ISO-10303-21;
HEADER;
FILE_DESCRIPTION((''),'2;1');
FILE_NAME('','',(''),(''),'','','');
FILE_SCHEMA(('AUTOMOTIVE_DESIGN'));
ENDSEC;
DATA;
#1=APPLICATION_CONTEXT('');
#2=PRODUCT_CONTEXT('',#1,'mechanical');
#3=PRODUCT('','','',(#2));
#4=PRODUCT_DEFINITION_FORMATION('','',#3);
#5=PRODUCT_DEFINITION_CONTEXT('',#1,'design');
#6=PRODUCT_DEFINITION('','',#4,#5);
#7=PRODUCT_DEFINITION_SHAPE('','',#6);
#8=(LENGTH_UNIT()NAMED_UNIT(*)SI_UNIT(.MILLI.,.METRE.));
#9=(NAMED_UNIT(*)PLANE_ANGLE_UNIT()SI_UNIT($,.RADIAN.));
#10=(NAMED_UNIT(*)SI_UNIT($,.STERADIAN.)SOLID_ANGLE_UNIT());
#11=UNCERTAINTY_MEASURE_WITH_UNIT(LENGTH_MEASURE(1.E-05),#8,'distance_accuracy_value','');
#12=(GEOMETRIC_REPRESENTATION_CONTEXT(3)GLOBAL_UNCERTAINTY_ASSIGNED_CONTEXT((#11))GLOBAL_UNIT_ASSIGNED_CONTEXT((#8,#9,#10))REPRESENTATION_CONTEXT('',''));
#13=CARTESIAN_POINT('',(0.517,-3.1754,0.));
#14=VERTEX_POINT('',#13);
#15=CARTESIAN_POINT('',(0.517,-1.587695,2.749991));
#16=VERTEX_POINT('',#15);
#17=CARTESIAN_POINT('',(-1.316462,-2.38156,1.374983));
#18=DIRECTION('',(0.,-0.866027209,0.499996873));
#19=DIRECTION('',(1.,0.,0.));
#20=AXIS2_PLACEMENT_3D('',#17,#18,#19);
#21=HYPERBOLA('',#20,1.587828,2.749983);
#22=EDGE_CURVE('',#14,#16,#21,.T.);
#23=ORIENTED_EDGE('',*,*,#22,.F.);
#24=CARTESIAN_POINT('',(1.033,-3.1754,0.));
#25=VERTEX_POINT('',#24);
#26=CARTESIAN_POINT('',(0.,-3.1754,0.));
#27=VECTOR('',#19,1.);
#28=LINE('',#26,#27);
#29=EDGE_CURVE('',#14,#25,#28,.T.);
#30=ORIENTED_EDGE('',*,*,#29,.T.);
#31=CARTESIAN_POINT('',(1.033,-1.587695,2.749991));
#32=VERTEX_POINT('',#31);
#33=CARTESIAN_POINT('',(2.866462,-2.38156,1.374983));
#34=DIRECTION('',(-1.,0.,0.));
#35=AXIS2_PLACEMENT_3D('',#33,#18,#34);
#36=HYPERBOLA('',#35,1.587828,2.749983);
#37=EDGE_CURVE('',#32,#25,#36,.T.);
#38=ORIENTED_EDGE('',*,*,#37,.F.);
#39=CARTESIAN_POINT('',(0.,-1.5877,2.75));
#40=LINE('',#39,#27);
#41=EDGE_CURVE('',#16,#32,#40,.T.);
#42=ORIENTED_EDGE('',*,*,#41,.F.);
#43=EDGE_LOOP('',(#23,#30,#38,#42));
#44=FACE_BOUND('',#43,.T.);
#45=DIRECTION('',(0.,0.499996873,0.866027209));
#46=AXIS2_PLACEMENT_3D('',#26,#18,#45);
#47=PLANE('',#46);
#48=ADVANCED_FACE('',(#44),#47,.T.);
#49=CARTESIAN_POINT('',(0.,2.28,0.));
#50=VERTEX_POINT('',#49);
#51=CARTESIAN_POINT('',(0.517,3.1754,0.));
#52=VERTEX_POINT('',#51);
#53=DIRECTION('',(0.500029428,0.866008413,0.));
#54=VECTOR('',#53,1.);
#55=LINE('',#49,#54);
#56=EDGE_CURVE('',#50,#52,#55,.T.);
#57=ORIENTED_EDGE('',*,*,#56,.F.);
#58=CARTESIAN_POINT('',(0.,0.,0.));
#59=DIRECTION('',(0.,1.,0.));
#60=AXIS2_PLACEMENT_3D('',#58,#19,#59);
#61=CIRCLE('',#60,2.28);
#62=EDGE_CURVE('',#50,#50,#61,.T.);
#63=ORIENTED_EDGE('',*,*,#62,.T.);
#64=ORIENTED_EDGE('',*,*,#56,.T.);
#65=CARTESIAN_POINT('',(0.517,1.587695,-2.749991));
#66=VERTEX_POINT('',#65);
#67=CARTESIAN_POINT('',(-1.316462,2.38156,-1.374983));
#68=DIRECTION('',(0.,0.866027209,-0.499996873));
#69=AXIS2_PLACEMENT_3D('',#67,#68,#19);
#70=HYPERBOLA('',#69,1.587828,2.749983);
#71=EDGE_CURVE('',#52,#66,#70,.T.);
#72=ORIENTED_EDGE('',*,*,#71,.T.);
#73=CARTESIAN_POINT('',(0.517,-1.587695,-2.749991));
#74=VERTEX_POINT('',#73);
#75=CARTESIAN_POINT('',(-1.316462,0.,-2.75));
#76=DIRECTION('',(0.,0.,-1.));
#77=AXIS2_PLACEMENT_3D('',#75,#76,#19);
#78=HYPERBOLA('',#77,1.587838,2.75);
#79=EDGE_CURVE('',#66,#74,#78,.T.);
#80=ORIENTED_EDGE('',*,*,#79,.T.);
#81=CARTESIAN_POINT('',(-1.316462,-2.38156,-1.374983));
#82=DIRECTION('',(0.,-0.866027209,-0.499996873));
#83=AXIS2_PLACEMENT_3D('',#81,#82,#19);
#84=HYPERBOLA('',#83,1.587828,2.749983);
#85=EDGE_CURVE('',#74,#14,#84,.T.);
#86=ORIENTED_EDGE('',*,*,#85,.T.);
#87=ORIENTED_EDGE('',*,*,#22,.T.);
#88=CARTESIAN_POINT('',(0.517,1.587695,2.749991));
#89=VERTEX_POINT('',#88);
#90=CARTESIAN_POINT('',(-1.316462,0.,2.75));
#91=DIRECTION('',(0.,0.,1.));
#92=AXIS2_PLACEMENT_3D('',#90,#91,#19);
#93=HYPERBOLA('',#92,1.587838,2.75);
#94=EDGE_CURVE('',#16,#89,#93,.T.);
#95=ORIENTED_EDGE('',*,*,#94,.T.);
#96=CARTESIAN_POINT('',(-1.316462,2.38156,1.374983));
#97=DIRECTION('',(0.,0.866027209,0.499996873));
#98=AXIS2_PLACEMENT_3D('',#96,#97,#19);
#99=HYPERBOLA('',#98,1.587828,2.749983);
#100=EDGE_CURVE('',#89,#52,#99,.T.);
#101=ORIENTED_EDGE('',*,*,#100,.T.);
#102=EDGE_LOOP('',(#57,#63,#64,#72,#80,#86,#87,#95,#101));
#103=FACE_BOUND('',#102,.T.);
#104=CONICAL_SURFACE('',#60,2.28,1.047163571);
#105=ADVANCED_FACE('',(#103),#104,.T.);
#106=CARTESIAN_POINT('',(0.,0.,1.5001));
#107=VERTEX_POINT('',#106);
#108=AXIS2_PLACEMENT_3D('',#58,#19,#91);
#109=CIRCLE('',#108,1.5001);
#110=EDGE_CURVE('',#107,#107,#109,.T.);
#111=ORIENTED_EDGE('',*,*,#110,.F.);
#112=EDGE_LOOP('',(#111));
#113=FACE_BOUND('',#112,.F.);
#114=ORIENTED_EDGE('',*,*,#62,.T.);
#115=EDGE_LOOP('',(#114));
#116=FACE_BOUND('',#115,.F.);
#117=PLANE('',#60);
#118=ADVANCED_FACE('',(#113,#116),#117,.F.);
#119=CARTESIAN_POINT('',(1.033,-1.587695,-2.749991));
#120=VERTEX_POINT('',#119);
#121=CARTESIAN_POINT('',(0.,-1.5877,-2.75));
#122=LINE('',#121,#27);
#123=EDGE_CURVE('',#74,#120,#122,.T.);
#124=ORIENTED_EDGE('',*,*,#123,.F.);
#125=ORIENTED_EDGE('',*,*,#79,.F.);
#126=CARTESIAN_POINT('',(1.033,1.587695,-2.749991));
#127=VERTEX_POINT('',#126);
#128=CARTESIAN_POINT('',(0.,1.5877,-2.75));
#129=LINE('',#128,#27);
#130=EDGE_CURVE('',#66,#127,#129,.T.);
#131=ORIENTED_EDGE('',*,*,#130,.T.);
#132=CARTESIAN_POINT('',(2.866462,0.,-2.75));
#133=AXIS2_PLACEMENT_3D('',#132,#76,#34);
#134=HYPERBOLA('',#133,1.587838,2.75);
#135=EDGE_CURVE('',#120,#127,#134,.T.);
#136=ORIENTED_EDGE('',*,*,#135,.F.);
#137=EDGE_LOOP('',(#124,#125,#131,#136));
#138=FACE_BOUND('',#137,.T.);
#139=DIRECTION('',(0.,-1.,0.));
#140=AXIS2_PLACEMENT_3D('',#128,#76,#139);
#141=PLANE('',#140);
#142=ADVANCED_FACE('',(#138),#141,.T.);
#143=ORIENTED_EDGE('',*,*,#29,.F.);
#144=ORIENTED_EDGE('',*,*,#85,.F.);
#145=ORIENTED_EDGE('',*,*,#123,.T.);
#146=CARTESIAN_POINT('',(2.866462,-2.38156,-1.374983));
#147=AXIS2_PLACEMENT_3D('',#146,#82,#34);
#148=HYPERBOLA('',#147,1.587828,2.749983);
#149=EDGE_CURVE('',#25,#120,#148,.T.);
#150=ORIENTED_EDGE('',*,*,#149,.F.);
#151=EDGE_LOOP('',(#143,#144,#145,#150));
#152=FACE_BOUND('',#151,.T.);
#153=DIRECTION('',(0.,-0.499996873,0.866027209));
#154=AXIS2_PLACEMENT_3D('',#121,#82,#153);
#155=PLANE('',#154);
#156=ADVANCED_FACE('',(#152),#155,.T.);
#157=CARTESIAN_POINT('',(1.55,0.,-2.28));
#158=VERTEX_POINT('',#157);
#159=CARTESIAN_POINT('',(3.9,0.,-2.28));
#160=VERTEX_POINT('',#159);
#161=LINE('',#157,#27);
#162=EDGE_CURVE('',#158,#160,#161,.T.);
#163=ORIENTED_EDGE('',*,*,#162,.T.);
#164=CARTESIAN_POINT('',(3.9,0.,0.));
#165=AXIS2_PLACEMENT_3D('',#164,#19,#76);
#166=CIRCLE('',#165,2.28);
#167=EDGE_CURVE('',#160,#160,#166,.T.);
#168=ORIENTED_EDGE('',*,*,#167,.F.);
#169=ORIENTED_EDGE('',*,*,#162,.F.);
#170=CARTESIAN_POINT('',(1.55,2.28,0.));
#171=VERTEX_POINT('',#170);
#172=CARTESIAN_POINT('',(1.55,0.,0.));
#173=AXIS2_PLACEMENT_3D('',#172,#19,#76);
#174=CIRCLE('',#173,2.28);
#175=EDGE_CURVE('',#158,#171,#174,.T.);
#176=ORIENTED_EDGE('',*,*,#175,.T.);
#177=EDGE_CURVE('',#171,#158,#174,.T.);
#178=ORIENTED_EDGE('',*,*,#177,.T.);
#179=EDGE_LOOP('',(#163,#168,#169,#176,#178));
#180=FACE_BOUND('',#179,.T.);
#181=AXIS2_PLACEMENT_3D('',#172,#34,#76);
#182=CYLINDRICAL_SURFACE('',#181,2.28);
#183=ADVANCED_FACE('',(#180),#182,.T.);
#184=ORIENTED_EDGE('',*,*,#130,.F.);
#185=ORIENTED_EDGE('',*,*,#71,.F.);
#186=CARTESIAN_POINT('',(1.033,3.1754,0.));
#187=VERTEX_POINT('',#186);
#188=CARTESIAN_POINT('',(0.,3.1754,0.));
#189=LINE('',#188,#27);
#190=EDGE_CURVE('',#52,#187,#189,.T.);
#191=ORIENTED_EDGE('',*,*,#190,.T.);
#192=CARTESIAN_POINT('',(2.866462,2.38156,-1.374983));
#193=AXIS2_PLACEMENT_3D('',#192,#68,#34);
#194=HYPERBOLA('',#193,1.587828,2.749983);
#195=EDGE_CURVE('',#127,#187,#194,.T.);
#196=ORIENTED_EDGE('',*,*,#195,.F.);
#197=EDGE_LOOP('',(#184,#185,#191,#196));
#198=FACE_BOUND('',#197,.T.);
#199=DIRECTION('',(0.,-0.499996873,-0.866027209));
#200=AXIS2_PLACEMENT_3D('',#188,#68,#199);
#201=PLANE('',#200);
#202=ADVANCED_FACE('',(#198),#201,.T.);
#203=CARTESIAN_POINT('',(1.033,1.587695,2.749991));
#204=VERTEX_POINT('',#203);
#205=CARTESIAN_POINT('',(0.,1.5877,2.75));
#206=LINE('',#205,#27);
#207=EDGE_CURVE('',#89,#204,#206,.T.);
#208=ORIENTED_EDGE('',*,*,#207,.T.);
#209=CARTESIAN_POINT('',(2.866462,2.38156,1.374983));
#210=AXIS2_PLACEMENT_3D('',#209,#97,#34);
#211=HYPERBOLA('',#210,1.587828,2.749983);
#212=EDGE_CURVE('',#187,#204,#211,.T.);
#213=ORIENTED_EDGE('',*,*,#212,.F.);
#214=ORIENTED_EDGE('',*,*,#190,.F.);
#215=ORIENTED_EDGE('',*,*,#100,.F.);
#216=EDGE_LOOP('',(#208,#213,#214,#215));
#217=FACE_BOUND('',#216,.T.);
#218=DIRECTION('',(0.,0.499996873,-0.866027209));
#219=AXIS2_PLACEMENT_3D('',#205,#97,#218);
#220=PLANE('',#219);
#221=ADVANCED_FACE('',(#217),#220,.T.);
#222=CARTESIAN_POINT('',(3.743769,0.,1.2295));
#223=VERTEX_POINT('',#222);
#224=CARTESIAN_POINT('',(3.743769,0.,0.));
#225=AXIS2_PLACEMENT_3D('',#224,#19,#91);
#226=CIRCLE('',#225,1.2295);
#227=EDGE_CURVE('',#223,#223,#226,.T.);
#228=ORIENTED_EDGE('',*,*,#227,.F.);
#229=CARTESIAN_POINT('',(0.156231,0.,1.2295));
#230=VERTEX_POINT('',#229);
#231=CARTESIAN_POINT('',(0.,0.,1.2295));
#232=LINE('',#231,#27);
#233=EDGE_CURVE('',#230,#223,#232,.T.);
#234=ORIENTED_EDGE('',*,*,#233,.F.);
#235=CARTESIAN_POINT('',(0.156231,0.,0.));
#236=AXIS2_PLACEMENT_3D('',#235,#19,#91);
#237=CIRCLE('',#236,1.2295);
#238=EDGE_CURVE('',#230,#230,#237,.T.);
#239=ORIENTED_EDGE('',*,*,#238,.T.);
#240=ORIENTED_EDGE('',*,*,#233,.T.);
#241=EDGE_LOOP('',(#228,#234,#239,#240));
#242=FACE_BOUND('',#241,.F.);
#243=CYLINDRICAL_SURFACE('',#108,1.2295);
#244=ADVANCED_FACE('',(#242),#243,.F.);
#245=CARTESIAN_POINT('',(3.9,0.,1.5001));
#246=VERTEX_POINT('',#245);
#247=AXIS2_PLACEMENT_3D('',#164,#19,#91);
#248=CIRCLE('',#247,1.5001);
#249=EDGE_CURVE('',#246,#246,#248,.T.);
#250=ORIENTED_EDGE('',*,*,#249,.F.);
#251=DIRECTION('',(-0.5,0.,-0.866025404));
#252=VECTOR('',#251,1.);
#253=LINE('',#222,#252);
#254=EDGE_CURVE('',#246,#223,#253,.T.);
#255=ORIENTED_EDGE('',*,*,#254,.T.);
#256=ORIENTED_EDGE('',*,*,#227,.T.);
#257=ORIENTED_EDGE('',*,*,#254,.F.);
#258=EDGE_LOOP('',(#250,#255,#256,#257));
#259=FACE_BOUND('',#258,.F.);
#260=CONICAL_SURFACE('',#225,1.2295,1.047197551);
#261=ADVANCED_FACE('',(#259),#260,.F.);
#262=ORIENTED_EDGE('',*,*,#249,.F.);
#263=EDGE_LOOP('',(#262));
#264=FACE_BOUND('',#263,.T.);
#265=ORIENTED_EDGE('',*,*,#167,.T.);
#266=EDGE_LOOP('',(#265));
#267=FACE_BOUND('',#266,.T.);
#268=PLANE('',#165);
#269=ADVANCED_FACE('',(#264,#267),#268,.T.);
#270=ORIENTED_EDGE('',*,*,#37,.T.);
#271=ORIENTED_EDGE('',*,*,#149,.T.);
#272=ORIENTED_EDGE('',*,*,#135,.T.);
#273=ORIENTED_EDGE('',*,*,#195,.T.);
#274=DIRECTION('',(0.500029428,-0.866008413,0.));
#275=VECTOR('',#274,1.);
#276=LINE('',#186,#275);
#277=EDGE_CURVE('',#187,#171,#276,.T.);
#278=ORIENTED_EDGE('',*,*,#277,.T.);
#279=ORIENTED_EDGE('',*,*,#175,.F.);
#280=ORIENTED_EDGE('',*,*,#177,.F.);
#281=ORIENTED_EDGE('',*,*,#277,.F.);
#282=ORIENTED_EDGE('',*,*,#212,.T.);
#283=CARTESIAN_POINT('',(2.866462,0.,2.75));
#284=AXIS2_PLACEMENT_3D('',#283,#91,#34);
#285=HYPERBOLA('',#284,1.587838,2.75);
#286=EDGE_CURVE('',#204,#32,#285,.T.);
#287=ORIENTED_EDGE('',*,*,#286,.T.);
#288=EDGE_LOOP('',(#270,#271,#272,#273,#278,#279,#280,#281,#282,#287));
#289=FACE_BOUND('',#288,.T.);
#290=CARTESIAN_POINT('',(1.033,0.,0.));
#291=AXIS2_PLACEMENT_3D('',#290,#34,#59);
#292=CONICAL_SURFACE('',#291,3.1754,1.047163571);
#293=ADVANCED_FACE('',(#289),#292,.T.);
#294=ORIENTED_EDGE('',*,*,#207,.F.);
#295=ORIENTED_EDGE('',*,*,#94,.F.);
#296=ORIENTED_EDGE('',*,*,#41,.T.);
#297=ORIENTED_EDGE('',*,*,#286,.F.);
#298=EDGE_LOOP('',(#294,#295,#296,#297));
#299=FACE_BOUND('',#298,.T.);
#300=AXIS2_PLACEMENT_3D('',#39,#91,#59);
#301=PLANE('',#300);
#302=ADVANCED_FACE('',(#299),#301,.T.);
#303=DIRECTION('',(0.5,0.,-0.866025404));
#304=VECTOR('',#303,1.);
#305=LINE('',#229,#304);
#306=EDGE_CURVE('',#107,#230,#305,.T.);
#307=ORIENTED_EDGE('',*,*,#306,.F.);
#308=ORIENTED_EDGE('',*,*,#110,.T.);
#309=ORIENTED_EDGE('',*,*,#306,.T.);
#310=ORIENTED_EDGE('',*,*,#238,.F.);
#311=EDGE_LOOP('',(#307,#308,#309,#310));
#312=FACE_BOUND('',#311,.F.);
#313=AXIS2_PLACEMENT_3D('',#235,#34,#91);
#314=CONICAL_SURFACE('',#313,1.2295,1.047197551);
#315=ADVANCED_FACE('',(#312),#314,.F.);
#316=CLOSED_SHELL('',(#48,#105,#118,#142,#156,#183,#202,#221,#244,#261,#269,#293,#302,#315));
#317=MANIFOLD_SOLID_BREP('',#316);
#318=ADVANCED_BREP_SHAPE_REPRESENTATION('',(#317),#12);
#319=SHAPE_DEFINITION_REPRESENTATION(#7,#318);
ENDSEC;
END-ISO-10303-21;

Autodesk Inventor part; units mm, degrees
ref_plane "YZ Plane" through (0, 0, 0) normal (1, 0, 0) x (0, 1, 0)
ref_plane "XZ Plane" through (0, 0, 0) normal (0, 1, 0) x (-1, 0, 0)
sketch "Sketch1" plane through (0, 0, 0) normal (1, 0, 0) x (0, 1, 0)
  line L0 (1.5877, -2.75) -> (-1.5877, -2.75)
  line L1 (-1.5877, -2.75) -> (-3.1754, 0)
  line L2 (-3.1754, 0) -> (-1.5877, 2.75)
  line L3 (-1.5877, 2.75) -> (1.5877, 2.75)
  line L4 (1.5877, 2.75) -> (3.1754, 0)
  line L5 (3.1754, 0) -> (1.5877, -2.75)
  point P0 (0, 0)
  point P1 (0, 0)
  dimension "d0" = 6.3509
extrude "Body" add sketch "Sketch1" along normal blind 1.55
sketch "Sketch2" plane through (1.55, 0, 0) normal (1, 0, 0) x (0, 0, -1)
  circle A0 centre (0, 0) radius 2.28
  dimension "d7" = 4.56
extrude "Ring" add sketch "Sketch2" along normal blind 2.35
sketch "Sketch3" plane through (0, 0, 0) normal (0, 0, 1) x (1, 0, 0)
  line L0 (0, 1.5877) -> (0, 3.1754) projected
  line L1 (0, 3.1754) -> (1.55, 3.1754) projected
  line L2 (1.55, 1.5877) -> (1.55, 3.1754) projected
  line L3 (-0.31, 0) -> (1.86, 0) projected
  line L4 (0, 2.28) -> (0.517, 3.1754)
  line L5 (1.033, 3.1754) -> (1.55, 2.28)
  dimension "d3" = 30
  dimension "d4" = 30
  dimension "d5" = 4.56
  dimension "d6" = 4.56
revolve "Chamfer1" cut sketch "Sketch3" angle 360 about axis through (-10, 0, 0) along (1, 0, 0)
sketch "Sketch4" plane through (0, 0, 0) normal (-1, 0, 0) x (0, 0, 1)
  line L0 (0, -4.4456) -> (0, 4.4456) projected
  line L1 (-3.85, 0) -> (3.85, 0) projected
  point P0 (0, 0)
hole "Thread" at (0, 0, 0) direction (1, 0, 0) diameter 2.459 end through all thread size "M3x0.5" class "6H" standard "ISO Metric profile"
chamfer "Chamfer2" distance 0.2706 angle 30 1 edges at (0, 0, -1.2295) measured on face at (0, 1.9048, -0.2313)
chamfer "Chamfer3" distance 0.2706 angle 30 1 edges at (3.9, 0, -1.2295) measured on face at (3.9, -0.28, -1.8958)
ref_plane "Work Plane1" through (9.2625, 0, 0) normal (0, 0, 1) x (-1, 0, 0)
equation "\"d0\" = 1.1547 * SW"
equation "\"d1\" = KOH1"
equation "\"d7\" = SD2"
equation "\"d8\" = KOH - KOH1"
equation "\"d10\" = -0.5 * GD1 + 0.5 * NND"
equation "\"d46\" = -0.5 * GD1 + 0.5 * NND"
equation "\"d12\" = -0.5 * GD1 + 0.5 * NND"
equation "\"d47\" = -0.5 * GD1 + 0.5 * NND"
equation "\"d3\" = ANG1"
equation "\"d4\" = ANG2"
equation "\"d5\" = SW0"
equation "\"d6\" = SW01"
equation "\"ANG1\" = 30deg"
equation "\"ANG2\" = 30deg"
equation "\"NND\" = 3"
equation "\"KOH1\" = 1.55"
equation "\"KOH\" = 3.9"
equation "\"SW\" = 5.5"
equation "\"SW0\" = 4.56"
equation "\"SW01\" = SW0"
equation "\"SD2\" = SW0"
equation "\"GUL\" = 0.541266 * PTC"
equation "\"THREADDIA\" = 3"
equation "\"TOA\" = 30deg"
equation "\"PTC\" = 0.5"
equation "\"E0\" = 1.155 * SW"
equation "\"GAL\" = 0.541266 * PTC"
equation "\"GD1\" = 2.458734"
properties part number "ISO 10511 - M3" material "Steel, Mild"
